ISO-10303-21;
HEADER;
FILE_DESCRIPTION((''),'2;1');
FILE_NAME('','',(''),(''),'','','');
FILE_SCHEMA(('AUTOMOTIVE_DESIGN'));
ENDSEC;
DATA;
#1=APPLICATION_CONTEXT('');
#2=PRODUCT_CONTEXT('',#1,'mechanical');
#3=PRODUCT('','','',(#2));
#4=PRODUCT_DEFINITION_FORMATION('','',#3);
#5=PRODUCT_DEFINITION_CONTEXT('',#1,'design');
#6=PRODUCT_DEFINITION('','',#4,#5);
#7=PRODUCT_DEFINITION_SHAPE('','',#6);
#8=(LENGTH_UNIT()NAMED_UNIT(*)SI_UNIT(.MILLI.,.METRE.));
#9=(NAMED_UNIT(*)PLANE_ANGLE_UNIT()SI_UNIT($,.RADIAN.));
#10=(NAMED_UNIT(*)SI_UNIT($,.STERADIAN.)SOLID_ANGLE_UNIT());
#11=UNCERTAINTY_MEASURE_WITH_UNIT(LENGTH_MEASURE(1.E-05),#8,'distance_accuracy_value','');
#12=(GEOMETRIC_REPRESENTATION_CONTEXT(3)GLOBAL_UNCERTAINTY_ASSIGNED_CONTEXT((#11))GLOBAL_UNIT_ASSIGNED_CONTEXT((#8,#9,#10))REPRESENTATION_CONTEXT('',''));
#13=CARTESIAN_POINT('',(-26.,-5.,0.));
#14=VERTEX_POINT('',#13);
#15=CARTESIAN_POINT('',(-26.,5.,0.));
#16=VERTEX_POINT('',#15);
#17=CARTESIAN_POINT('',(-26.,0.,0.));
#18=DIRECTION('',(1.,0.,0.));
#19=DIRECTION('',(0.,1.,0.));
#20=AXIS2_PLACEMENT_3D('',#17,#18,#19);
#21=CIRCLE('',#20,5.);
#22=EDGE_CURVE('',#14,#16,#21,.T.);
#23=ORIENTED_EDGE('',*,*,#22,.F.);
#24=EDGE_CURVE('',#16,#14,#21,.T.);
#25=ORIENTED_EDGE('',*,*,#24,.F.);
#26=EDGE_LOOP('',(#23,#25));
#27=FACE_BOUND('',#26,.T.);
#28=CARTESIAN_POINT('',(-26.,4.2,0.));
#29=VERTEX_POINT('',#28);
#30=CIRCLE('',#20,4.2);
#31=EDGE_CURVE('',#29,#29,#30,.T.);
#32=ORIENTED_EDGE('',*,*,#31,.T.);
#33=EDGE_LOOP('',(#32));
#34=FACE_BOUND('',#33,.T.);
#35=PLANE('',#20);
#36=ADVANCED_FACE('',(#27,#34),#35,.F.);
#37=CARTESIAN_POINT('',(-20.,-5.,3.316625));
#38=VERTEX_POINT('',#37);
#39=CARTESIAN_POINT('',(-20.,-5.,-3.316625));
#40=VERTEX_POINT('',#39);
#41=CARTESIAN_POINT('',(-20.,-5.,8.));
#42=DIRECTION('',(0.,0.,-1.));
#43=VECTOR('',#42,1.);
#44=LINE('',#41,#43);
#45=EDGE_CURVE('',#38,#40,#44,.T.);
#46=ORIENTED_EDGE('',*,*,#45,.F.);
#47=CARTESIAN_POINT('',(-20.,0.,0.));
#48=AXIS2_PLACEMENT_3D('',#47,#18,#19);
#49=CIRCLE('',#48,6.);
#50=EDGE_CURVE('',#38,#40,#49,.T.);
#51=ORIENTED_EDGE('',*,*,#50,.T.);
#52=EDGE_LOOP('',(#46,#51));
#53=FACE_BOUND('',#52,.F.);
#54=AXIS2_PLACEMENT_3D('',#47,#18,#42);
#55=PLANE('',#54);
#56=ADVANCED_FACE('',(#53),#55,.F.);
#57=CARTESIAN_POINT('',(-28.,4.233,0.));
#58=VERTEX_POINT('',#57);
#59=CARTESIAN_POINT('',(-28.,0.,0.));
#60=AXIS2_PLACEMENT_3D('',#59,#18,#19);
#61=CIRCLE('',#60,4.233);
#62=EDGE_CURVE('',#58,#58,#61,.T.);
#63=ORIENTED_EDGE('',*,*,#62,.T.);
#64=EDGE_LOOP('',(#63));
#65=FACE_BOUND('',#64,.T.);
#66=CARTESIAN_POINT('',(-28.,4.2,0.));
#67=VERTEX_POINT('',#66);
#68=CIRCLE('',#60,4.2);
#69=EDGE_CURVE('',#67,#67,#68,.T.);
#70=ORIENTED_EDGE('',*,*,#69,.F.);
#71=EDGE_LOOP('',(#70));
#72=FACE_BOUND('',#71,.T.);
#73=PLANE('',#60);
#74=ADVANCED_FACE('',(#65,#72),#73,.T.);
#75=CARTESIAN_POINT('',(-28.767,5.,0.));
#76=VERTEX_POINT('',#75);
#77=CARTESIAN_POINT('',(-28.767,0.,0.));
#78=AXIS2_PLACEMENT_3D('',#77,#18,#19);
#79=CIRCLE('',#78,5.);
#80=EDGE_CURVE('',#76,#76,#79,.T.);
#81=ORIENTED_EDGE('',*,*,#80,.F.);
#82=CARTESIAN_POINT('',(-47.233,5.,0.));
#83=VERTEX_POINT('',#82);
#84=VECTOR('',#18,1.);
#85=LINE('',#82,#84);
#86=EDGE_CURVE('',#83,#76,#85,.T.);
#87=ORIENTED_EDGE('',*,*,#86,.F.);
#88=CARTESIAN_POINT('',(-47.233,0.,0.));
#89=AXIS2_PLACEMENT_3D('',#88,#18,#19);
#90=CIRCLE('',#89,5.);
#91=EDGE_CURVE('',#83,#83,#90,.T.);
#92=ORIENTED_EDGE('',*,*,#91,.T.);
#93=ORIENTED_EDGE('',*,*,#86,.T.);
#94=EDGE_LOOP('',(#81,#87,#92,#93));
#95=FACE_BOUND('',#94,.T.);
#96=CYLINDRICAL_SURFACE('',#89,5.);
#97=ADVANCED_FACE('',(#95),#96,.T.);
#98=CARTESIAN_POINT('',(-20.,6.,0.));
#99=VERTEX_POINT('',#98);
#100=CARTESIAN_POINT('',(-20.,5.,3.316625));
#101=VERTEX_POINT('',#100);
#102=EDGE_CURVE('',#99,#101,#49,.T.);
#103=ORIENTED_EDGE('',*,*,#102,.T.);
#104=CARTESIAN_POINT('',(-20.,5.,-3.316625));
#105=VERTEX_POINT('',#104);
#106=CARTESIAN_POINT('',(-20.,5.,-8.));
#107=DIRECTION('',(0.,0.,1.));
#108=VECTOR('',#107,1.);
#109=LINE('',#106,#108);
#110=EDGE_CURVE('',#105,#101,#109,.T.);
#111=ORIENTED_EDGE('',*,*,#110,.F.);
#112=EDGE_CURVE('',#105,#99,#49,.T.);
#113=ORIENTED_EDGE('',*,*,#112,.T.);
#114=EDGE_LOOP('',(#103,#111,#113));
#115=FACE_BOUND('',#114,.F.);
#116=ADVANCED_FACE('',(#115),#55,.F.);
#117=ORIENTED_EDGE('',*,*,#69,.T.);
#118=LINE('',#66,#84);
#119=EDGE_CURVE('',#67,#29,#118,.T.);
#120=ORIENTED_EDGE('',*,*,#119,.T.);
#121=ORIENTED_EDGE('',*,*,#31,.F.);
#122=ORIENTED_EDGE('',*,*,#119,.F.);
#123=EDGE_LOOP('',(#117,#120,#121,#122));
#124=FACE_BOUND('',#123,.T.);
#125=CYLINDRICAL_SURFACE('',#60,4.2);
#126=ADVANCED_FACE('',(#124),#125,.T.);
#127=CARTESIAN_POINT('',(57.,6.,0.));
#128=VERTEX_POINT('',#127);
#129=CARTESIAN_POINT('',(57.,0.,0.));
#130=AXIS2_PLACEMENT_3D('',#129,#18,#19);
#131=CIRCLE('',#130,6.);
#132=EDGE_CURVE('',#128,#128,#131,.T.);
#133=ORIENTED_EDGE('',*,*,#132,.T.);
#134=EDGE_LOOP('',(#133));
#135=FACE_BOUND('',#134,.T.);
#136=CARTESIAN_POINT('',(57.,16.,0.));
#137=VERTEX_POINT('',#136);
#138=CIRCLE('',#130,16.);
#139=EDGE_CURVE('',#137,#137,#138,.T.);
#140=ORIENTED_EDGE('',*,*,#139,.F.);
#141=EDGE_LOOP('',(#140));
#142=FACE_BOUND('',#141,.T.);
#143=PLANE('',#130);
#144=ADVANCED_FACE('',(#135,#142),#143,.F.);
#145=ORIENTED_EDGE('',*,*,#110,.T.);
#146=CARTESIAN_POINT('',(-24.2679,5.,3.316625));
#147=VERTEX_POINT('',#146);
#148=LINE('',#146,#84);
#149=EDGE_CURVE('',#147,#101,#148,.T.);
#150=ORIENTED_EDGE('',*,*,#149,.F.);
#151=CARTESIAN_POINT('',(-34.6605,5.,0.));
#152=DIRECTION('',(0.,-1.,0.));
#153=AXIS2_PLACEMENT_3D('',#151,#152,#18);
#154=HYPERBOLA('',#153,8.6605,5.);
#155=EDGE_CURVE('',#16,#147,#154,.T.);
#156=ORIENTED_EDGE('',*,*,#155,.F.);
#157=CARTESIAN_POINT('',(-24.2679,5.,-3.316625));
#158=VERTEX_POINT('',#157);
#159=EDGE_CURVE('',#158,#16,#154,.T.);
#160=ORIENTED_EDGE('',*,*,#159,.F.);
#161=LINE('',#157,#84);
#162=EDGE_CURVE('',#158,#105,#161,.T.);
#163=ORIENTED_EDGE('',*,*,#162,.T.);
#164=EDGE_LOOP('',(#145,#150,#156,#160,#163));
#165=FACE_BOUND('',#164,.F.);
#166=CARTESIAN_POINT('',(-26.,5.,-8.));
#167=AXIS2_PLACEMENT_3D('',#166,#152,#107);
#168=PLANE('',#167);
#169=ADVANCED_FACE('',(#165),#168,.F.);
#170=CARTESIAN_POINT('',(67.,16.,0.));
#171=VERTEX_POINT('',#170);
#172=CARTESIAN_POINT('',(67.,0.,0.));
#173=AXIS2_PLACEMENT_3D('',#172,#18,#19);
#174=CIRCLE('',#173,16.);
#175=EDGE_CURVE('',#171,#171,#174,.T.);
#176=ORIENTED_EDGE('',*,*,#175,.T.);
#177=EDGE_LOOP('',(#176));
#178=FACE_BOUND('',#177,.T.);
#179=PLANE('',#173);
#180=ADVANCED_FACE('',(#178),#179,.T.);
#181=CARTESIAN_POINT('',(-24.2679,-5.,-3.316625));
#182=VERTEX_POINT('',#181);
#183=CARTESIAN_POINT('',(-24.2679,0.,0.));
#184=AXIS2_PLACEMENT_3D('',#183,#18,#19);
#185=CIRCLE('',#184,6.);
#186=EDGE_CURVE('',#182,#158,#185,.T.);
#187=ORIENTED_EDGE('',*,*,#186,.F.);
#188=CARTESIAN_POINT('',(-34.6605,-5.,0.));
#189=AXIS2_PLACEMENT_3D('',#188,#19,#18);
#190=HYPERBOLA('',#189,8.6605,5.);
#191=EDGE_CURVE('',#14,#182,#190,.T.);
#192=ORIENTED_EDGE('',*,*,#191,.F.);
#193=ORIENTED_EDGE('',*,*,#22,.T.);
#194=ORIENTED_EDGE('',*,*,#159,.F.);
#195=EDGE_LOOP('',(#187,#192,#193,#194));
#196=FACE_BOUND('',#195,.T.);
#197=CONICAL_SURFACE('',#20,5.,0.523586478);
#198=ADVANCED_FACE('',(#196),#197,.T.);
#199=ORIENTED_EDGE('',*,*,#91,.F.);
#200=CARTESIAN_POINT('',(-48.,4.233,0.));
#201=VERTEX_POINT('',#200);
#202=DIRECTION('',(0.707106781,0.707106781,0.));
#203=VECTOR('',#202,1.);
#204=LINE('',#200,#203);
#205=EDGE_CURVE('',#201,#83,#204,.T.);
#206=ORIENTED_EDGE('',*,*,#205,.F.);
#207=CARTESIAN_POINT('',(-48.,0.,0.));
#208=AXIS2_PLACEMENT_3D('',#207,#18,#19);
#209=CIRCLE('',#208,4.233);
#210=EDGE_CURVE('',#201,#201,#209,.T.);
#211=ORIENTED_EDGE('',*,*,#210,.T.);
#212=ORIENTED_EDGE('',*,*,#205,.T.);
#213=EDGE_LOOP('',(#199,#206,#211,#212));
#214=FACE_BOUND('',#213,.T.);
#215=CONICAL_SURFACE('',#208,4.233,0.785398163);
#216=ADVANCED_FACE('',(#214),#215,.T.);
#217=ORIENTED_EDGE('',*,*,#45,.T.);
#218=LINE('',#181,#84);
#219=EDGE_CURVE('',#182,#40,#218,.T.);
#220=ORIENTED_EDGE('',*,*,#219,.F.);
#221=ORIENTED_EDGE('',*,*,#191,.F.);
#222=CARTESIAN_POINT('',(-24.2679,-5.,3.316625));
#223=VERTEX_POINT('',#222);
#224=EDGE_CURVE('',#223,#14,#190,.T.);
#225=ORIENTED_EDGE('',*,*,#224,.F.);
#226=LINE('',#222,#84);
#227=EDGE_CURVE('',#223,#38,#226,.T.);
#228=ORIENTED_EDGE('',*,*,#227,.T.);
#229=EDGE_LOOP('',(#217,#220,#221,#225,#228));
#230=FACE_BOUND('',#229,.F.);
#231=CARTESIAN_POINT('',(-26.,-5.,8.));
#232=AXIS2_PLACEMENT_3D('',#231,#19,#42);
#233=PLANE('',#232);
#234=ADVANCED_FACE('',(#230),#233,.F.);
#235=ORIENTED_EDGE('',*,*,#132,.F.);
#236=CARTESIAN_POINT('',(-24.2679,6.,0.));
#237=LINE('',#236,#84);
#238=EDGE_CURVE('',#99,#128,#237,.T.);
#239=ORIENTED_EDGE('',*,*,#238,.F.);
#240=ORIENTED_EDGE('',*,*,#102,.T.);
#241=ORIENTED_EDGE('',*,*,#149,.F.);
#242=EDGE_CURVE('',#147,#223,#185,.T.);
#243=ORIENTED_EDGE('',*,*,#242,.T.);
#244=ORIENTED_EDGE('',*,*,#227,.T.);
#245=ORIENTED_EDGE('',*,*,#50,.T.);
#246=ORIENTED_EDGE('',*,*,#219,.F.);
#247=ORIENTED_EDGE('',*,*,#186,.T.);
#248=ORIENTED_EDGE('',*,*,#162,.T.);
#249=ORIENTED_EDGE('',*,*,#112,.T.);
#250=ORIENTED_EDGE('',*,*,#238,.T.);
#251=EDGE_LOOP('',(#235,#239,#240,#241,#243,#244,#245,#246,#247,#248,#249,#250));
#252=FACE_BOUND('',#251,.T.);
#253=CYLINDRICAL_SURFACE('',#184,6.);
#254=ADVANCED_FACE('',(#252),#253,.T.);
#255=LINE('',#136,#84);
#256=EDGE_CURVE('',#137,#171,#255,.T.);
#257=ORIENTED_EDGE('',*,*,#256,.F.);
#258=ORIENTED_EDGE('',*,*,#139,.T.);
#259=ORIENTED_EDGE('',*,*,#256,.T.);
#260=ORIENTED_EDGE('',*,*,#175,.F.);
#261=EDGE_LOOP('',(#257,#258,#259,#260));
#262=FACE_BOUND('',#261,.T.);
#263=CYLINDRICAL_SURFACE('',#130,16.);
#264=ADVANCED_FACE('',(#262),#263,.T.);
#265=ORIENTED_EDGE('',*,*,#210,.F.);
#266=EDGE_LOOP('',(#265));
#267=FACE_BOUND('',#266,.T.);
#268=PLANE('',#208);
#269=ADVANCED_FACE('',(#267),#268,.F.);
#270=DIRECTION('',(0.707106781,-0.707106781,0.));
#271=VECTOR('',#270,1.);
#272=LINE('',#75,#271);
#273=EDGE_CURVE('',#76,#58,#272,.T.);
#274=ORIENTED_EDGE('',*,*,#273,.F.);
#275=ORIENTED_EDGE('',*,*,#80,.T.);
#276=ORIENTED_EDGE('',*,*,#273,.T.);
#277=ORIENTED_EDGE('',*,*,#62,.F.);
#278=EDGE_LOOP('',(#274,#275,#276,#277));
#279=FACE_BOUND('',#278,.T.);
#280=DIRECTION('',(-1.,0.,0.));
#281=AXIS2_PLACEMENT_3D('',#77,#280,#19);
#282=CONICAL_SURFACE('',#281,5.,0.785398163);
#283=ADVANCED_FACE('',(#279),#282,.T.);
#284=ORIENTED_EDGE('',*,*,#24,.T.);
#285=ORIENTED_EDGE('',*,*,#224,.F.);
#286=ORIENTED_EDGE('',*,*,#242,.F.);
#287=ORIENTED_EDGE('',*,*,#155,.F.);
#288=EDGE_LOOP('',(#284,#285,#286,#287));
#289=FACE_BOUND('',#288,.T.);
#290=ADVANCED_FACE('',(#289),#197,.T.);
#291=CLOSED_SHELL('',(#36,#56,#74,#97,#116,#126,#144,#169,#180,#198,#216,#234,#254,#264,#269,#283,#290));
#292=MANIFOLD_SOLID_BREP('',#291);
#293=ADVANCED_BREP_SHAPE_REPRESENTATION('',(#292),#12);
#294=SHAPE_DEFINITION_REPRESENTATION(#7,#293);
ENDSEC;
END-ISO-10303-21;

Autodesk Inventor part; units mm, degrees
sketch "Sketch_1" plane through (0, 0, 0) normal (0, 0, 1) x (1, 0, 0)
  line L0 (67, 0) -> (-48, 0)
  line L1 (-48, 0) -> (-48, 4.233)
  line L2 (-48, 4.233) -> (-47.233, 5)
  line L3 (-47.233, 5) -> (-28.767, 5)
  line L4 (-28.767, 5) -> (-28, 4.233)
  line L5 (-28, 4.233) -> (-28, 4.2)
  line L6 (-28, 4.2) -> (-26, 4.2)
  line L7 (-26, 4.2) -> (-26, 5)
  line L8 (-26, 5) -> (-24.2679, 6)
  line L9 (-24.2679, 6) -> (57, 6)
  line L10 (57, 6) -> (57, 16)
  line L11 (57, 16) -> (67, 16)
  line L12 (67, 16) -> (67, 0)
  line L13 (67, 0) -> (-48, 0)
revolve "Revolution1" add sketch "Sketch_1" angle 360 about axis through (67, 0, 0) along (1, 0, 0)
thread "Thread1" size "M10x1.25" class "6g" standard "ISO Metric profile" full length
sketch "Sketch_4" plane through (-26, 0, 0) normal (1, 0, 0) x (0, 0, -1)
  line L0 (-13, -10) -> (13, -10)
  line L1 (13, -10) -> (13, 10)
  line L2 (13, 10) -> (-13, 10)
  line L3 (-13, 10) -> (-13, -10)
  line L4 (-8, 5) -> (-8, -5)
  line L5 (-8, -5) -> (8, -5)
  line L6 (8, -5) -> (8, 5)
  line L7 (8, 5) -> (-8, 5)
extrude "Extrusion1" cut sketch "Sketch_4" along normal blind 6
ref_plane "A4_XY" through (170, 0, 0) normal (0, 1, 0) x (1, 0, 0)
ref_plane "A4_YZ" through (170, 0, 0) normal (1, 0, 0) x (0, 0, -1)
ref_plane "A4_ZX" through (170, 0, 0) normal (0, 0, -1) x (0, 1, 0)
ref_plane "ROD_BODY_XY" through (0, 0, 0) normal (1, 0, 0) x (0, 0, -1)
ref_plane "ROD_BODY_YZ" through (0, 0, 0) normal (0, 0, -1) x (0, 1, 0)
ref_plane "ROD_BODY_ZX" through (0, 0, 0) normal (0, 1, 0) x (1, 0, 0)
ref_plane "ROD_NUT_XY" through (-48, 0, 0) normal (-1, 0, 0) x (0, 0, -1)
ref_plane "ROD_NUT_YZ" through (-48, 0, 0) normal (0, 0, -1) x (0, -1, 0)
ref_plane "ROD_NUT_ZX" through (-48, 0, 0) normal (0, -1, 0) x (-1, 0, 0)
properties part number "CP96S32-25_ROD"
